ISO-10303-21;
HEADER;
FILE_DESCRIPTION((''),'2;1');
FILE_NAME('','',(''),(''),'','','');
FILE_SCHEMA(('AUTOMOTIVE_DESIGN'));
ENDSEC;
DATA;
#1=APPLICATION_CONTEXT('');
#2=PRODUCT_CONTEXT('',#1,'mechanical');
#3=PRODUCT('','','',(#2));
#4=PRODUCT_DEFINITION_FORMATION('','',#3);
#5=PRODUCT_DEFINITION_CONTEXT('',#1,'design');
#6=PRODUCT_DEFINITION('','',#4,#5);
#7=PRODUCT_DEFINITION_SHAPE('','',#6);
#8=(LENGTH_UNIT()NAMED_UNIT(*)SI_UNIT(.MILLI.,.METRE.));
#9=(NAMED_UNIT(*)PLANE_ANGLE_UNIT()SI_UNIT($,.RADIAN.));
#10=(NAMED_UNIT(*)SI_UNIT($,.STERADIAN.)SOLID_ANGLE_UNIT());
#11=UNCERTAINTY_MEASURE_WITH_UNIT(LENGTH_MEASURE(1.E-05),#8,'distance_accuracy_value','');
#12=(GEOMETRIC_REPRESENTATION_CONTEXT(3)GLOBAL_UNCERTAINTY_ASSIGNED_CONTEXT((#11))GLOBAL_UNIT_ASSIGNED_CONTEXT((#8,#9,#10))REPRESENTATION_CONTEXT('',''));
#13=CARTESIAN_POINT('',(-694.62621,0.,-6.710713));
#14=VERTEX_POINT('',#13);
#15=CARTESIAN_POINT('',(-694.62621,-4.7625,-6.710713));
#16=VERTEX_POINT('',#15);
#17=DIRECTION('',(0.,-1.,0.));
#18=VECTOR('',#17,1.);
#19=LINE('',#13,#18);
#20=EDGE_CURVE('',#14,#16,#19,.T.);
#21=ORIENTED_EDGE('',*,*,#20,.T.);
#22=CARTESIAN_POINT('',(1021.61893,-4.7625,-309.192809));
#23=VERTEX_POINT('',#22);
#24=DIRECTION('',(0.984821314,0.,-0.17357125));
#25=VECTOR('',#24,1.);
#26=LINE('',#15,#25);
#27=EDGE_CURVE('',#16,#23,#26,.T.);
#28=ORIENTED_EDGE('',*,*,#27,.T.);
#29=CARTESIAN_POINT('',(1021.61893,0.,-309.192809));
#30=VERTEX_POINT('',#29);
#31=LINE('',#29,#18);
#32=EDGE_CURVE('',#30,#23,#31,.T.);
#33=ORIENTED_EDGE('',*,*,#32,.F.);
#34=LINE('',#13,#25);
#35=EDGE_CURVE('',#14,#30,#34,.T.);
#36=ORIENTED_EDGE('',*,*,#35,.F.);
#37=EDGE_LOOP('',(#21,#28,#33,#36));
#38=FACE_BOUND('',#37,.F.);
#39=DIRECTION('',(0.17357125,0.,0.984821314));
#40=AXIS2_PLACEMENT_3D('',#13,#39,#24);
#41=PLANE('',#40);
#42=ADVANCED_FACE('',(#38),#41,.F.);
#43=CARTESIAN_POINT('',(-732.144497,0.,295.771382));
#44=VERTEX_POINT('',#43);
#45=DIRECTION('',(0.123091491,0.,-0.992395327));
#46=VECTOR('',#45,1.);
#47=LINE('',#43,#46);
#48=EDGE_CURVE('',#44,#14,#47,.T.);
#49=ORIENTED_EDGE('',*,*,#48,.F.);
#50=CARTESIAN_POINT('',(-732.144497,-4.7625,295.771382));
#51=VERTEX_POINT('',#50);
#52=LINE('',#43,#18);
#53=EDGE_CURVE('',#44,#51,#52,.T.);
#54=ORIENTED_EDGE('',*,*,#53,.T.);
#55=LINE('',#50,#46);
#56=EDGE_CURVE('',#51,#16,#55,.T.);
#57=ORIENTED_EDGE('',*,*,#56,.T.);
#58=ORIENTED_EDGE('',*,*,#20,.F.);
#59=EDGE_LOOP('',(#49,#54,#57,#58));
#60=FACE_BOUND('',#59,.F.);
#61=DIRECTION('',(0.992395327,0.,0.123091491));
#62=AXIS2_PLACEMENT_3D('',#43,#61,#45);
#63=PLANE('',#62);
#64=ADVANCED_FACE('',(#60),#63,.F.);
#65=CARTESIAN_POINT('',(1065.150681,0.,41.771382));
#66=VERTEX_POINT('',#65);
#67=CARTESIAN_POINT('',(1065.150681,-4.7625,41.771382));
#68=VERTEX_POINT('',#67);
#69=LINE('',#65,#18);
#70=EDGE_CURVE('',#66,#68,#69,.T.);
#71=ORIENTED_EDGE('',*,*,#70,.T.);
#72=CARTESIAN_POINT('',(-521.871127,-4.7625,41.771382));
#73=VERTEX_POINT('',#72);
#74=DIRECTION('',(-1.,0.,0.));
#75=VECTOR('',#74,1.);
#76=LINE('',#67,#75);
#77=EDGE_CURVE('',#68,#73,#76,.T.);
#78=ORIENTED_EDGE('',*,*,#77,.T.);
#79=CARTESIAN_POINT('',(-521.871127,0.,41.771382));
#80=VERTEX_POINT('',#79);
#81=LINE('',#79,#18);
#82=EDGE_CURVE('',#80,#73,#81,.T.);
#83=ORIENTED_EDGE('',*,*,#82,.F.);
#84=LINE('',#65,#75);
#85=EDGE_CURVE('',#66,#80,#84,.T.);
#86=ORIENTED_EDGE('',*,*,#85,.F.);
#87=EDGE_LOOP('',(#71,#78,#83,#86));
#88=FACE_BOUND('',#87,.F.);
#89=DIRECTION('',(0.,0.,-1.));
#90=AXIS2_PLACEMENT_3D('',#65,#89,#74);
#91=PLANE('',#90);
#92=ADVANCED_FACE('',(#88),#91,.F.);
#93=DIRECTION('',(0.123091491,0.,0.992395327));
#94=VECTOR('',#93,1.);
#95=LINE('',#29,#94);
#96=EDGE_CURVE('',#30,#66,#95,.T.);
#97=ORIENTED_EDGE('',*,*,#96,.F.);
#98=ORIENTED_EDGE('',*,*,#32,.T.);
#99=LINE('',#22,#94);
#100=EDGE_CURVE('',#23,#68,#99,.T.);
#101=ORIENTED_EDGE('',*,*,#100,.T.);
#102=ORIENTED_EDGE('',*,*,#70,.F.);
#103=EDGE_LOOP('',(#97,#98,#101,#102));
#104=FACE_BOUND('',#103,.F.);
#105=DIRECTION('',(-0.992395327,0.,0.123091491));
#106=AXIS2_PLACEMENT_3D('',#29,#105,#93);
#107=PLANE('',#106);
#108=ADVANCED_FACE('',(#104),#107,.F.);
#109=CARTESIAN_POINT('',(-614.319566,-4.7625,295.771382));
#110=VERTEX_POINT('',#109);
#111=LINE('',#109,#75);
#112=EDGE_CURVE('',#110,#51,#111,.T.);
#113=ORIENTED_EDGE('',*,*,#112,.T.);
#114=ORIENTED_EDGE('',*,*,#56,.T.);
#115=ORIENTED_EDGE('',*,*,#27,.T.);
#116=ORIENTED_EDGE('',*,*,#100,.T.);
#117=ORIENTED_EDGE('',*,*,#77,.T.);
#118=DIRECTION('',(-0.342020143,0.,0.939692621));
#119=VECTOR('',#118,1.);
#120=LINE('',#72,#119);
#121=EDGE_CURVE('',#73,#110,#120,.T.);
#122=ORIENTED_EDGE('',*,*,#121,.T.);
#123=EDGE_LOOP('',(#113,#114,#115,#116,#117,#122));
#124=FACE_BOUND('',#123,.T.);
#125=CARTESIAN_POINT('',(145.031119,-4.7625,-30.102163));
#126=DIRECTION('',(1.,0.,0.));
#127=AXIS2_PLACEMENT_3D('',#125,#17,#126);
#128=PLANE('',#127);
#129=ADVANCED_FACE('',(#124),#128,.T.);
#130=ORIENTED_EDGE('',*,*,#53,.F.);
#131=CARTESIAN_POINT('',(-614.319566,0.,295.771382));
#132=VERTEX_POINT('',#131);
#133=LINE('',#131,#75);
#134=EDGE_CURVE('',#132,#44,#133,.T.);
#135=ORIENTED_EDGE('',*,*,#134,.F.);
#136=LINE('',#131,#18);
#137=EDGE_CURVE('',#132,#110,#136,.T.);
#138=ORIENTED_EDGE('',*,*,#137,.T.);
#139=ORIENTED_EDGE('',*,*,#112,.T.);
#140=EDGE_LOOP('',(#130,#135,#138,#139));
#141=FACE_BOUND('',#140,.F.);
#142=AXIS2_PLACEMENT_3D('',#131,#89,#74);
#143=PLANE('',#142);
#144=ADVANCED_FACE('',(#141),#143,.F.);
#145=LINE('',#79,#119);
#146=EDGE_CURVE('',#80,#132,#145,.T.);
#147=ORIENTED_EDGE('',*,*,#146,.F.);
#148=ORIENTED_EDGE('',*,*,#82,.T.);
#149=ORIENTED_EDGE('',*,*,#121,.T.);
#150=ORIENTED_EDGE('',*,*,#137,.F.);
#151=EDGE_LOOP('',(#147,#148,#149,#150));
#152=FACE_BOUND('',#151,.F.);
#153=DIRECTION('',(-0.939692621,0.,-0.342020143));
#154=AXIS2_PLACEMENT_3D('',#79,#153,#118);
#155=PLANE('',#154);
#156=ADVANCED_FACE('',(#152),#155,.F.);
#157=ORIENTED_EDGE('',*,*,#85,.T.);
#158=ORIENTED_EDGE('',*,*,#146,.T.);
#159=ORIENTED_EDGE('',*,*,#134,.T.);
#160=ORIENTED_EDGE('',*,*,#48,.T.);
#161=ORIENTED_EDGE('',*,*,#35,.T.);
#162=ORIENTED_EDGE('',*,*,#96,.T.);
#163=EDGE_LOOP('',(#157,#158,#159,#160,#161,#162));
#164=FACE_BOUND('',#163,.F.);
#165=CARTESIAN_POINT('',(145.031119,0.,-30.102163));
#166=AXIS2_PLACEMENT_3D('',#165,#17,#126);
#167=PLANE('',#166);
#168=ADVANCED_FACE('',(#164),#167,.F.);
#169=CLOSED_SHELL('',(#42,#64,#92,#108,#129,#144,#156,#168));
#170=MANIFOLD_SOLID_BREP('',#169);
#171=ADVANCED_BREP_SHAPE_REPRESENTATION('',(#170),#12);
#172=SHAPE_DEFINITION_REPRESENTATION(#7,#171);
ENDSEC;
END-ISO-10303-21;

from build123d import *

# Parameters (mm, degrees)
F1_DEPTH = 4.7625


# Not quite as in the source:
# - a length typed as a fraction of an inch, garbled in the dataset ("3 / 203.2 mm" for 3/8 in), is restored


with BuildPart() as f1:
    # F0 (on Front) → F1 (new body)
    with BuildSketch(Plane.XZ):
        Polygon((1021.618930345, -309.1928088559), (1065.1506806603, 41.771382421), (-521.8711266779, 41.771382421), (-614.3195661815, 295.771382421), (-732.144496754, 295.771382421), (-694.6262103035, -6.7107132174), align=None)
    extrude(amount=F1_DEPTH)


solid = f1.part
